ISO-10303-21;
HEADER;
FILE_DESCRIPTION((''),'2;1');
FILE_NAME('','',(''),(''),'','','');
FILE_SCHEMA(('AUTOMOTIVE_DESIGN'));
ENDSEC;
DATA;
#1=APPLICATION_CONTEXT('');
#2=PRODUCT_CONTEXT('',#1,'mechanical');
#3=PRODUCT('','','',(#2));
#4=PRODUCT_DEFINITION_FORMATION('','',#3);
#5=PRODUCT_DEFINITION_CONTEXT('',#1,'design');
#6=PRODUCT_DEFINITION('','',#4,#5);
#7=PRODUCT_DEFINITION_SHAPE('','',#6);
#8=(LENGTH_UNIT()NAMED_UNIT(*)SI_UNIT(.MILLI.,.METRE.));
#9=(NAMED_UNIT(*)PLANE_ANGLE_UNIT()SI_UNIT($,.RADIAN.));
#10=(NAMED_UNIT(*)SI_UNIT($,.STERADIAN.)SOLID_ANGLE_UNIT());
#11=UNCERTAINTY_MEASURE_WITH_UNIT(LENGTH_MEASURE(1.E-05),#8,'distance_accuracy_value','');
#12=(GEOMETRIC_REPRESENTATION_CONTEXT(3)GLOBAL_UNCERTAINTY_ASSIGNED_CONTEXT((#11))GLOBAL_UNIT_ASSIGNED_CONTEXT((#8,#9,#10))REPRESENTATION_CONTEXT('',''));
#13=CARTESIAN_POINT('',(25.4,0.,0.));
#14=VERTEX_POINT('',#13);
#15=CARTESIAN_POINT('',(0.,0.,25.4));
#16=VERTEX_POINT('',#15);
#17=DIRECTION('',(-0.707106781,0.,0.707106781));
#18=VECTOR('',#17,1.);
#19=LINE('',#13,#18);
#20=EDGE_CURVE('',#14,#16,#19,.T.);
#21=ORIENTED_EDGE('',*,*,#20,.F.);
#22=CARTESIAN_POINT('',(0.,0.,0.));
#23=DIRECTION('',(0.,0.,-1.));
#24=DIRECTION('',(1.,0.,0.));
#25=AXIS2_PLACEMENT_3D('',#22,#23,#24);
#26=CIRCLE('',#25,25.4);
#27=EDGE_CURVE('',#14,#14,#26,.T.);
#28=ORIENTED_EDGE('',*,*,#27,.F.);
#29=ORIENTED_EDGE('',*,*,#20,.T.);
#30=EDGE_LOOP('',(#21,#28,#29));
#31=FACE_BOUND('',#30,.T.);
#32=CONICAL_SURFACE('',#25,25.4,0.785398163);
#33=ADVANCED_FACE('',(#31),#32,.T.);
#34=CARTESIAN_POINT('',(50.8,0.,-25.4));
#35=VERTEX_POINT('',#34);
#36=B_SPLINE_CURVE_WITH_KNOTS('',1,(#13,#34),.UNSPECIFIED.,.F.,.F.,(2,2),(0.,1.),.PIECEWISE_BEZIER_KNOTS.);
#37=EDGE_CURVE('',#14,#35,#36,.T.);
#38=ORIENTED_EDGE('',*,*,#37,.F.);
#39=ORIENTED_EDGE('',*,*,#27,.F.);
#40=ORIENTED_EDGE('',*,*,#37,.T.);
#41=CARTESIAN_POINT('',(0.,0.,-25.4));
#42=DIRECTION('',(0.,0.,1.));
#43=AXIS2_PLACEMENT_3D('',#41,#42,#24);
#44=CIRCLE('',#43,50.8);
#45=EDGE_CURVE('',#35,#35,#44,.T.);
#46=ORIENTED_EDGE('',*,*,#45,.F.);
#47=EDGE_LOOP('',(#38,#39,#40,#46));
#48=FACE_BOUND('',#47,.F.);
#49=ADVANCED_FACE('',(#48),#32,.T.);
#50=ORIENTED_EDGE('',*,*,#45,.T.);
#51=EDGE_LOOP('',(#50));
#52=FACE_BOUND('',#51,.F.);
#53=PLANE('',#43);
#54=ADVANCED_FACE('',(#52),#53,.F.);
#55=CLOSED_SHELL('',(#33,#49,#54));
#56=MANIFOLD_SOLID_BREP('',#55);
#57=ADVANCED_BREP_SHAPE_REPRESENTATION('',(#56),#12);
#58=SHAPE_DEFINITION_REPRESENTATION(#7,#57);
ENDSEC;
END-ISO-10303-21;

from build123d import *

# Parameters (mm, degrees)
F0_R          = 25.4
F1_DEPTH      = 25.4
F1_TAPER      = 45
F1_DEPTH_BACK = 25.4
F1_TAPER_BACK = -45


# Not quite as in the source:
# - a feature names something its author has since deleted; it is built from what else it names


with BuildPart() as f1:
    # F0 (on Top) → F1 (new body, two sides)
    with BuildSketch(Plane.XY) as f1_sk:
        Circle(F0_R)
    extrude(amount=F1_DEPTH, taper=F1_TAPER)
    extrude(f1_sk.sketch, amount=-F1_DEPTH_BACK, taper=F1_TAPER_BACK)


solid = f1.part
